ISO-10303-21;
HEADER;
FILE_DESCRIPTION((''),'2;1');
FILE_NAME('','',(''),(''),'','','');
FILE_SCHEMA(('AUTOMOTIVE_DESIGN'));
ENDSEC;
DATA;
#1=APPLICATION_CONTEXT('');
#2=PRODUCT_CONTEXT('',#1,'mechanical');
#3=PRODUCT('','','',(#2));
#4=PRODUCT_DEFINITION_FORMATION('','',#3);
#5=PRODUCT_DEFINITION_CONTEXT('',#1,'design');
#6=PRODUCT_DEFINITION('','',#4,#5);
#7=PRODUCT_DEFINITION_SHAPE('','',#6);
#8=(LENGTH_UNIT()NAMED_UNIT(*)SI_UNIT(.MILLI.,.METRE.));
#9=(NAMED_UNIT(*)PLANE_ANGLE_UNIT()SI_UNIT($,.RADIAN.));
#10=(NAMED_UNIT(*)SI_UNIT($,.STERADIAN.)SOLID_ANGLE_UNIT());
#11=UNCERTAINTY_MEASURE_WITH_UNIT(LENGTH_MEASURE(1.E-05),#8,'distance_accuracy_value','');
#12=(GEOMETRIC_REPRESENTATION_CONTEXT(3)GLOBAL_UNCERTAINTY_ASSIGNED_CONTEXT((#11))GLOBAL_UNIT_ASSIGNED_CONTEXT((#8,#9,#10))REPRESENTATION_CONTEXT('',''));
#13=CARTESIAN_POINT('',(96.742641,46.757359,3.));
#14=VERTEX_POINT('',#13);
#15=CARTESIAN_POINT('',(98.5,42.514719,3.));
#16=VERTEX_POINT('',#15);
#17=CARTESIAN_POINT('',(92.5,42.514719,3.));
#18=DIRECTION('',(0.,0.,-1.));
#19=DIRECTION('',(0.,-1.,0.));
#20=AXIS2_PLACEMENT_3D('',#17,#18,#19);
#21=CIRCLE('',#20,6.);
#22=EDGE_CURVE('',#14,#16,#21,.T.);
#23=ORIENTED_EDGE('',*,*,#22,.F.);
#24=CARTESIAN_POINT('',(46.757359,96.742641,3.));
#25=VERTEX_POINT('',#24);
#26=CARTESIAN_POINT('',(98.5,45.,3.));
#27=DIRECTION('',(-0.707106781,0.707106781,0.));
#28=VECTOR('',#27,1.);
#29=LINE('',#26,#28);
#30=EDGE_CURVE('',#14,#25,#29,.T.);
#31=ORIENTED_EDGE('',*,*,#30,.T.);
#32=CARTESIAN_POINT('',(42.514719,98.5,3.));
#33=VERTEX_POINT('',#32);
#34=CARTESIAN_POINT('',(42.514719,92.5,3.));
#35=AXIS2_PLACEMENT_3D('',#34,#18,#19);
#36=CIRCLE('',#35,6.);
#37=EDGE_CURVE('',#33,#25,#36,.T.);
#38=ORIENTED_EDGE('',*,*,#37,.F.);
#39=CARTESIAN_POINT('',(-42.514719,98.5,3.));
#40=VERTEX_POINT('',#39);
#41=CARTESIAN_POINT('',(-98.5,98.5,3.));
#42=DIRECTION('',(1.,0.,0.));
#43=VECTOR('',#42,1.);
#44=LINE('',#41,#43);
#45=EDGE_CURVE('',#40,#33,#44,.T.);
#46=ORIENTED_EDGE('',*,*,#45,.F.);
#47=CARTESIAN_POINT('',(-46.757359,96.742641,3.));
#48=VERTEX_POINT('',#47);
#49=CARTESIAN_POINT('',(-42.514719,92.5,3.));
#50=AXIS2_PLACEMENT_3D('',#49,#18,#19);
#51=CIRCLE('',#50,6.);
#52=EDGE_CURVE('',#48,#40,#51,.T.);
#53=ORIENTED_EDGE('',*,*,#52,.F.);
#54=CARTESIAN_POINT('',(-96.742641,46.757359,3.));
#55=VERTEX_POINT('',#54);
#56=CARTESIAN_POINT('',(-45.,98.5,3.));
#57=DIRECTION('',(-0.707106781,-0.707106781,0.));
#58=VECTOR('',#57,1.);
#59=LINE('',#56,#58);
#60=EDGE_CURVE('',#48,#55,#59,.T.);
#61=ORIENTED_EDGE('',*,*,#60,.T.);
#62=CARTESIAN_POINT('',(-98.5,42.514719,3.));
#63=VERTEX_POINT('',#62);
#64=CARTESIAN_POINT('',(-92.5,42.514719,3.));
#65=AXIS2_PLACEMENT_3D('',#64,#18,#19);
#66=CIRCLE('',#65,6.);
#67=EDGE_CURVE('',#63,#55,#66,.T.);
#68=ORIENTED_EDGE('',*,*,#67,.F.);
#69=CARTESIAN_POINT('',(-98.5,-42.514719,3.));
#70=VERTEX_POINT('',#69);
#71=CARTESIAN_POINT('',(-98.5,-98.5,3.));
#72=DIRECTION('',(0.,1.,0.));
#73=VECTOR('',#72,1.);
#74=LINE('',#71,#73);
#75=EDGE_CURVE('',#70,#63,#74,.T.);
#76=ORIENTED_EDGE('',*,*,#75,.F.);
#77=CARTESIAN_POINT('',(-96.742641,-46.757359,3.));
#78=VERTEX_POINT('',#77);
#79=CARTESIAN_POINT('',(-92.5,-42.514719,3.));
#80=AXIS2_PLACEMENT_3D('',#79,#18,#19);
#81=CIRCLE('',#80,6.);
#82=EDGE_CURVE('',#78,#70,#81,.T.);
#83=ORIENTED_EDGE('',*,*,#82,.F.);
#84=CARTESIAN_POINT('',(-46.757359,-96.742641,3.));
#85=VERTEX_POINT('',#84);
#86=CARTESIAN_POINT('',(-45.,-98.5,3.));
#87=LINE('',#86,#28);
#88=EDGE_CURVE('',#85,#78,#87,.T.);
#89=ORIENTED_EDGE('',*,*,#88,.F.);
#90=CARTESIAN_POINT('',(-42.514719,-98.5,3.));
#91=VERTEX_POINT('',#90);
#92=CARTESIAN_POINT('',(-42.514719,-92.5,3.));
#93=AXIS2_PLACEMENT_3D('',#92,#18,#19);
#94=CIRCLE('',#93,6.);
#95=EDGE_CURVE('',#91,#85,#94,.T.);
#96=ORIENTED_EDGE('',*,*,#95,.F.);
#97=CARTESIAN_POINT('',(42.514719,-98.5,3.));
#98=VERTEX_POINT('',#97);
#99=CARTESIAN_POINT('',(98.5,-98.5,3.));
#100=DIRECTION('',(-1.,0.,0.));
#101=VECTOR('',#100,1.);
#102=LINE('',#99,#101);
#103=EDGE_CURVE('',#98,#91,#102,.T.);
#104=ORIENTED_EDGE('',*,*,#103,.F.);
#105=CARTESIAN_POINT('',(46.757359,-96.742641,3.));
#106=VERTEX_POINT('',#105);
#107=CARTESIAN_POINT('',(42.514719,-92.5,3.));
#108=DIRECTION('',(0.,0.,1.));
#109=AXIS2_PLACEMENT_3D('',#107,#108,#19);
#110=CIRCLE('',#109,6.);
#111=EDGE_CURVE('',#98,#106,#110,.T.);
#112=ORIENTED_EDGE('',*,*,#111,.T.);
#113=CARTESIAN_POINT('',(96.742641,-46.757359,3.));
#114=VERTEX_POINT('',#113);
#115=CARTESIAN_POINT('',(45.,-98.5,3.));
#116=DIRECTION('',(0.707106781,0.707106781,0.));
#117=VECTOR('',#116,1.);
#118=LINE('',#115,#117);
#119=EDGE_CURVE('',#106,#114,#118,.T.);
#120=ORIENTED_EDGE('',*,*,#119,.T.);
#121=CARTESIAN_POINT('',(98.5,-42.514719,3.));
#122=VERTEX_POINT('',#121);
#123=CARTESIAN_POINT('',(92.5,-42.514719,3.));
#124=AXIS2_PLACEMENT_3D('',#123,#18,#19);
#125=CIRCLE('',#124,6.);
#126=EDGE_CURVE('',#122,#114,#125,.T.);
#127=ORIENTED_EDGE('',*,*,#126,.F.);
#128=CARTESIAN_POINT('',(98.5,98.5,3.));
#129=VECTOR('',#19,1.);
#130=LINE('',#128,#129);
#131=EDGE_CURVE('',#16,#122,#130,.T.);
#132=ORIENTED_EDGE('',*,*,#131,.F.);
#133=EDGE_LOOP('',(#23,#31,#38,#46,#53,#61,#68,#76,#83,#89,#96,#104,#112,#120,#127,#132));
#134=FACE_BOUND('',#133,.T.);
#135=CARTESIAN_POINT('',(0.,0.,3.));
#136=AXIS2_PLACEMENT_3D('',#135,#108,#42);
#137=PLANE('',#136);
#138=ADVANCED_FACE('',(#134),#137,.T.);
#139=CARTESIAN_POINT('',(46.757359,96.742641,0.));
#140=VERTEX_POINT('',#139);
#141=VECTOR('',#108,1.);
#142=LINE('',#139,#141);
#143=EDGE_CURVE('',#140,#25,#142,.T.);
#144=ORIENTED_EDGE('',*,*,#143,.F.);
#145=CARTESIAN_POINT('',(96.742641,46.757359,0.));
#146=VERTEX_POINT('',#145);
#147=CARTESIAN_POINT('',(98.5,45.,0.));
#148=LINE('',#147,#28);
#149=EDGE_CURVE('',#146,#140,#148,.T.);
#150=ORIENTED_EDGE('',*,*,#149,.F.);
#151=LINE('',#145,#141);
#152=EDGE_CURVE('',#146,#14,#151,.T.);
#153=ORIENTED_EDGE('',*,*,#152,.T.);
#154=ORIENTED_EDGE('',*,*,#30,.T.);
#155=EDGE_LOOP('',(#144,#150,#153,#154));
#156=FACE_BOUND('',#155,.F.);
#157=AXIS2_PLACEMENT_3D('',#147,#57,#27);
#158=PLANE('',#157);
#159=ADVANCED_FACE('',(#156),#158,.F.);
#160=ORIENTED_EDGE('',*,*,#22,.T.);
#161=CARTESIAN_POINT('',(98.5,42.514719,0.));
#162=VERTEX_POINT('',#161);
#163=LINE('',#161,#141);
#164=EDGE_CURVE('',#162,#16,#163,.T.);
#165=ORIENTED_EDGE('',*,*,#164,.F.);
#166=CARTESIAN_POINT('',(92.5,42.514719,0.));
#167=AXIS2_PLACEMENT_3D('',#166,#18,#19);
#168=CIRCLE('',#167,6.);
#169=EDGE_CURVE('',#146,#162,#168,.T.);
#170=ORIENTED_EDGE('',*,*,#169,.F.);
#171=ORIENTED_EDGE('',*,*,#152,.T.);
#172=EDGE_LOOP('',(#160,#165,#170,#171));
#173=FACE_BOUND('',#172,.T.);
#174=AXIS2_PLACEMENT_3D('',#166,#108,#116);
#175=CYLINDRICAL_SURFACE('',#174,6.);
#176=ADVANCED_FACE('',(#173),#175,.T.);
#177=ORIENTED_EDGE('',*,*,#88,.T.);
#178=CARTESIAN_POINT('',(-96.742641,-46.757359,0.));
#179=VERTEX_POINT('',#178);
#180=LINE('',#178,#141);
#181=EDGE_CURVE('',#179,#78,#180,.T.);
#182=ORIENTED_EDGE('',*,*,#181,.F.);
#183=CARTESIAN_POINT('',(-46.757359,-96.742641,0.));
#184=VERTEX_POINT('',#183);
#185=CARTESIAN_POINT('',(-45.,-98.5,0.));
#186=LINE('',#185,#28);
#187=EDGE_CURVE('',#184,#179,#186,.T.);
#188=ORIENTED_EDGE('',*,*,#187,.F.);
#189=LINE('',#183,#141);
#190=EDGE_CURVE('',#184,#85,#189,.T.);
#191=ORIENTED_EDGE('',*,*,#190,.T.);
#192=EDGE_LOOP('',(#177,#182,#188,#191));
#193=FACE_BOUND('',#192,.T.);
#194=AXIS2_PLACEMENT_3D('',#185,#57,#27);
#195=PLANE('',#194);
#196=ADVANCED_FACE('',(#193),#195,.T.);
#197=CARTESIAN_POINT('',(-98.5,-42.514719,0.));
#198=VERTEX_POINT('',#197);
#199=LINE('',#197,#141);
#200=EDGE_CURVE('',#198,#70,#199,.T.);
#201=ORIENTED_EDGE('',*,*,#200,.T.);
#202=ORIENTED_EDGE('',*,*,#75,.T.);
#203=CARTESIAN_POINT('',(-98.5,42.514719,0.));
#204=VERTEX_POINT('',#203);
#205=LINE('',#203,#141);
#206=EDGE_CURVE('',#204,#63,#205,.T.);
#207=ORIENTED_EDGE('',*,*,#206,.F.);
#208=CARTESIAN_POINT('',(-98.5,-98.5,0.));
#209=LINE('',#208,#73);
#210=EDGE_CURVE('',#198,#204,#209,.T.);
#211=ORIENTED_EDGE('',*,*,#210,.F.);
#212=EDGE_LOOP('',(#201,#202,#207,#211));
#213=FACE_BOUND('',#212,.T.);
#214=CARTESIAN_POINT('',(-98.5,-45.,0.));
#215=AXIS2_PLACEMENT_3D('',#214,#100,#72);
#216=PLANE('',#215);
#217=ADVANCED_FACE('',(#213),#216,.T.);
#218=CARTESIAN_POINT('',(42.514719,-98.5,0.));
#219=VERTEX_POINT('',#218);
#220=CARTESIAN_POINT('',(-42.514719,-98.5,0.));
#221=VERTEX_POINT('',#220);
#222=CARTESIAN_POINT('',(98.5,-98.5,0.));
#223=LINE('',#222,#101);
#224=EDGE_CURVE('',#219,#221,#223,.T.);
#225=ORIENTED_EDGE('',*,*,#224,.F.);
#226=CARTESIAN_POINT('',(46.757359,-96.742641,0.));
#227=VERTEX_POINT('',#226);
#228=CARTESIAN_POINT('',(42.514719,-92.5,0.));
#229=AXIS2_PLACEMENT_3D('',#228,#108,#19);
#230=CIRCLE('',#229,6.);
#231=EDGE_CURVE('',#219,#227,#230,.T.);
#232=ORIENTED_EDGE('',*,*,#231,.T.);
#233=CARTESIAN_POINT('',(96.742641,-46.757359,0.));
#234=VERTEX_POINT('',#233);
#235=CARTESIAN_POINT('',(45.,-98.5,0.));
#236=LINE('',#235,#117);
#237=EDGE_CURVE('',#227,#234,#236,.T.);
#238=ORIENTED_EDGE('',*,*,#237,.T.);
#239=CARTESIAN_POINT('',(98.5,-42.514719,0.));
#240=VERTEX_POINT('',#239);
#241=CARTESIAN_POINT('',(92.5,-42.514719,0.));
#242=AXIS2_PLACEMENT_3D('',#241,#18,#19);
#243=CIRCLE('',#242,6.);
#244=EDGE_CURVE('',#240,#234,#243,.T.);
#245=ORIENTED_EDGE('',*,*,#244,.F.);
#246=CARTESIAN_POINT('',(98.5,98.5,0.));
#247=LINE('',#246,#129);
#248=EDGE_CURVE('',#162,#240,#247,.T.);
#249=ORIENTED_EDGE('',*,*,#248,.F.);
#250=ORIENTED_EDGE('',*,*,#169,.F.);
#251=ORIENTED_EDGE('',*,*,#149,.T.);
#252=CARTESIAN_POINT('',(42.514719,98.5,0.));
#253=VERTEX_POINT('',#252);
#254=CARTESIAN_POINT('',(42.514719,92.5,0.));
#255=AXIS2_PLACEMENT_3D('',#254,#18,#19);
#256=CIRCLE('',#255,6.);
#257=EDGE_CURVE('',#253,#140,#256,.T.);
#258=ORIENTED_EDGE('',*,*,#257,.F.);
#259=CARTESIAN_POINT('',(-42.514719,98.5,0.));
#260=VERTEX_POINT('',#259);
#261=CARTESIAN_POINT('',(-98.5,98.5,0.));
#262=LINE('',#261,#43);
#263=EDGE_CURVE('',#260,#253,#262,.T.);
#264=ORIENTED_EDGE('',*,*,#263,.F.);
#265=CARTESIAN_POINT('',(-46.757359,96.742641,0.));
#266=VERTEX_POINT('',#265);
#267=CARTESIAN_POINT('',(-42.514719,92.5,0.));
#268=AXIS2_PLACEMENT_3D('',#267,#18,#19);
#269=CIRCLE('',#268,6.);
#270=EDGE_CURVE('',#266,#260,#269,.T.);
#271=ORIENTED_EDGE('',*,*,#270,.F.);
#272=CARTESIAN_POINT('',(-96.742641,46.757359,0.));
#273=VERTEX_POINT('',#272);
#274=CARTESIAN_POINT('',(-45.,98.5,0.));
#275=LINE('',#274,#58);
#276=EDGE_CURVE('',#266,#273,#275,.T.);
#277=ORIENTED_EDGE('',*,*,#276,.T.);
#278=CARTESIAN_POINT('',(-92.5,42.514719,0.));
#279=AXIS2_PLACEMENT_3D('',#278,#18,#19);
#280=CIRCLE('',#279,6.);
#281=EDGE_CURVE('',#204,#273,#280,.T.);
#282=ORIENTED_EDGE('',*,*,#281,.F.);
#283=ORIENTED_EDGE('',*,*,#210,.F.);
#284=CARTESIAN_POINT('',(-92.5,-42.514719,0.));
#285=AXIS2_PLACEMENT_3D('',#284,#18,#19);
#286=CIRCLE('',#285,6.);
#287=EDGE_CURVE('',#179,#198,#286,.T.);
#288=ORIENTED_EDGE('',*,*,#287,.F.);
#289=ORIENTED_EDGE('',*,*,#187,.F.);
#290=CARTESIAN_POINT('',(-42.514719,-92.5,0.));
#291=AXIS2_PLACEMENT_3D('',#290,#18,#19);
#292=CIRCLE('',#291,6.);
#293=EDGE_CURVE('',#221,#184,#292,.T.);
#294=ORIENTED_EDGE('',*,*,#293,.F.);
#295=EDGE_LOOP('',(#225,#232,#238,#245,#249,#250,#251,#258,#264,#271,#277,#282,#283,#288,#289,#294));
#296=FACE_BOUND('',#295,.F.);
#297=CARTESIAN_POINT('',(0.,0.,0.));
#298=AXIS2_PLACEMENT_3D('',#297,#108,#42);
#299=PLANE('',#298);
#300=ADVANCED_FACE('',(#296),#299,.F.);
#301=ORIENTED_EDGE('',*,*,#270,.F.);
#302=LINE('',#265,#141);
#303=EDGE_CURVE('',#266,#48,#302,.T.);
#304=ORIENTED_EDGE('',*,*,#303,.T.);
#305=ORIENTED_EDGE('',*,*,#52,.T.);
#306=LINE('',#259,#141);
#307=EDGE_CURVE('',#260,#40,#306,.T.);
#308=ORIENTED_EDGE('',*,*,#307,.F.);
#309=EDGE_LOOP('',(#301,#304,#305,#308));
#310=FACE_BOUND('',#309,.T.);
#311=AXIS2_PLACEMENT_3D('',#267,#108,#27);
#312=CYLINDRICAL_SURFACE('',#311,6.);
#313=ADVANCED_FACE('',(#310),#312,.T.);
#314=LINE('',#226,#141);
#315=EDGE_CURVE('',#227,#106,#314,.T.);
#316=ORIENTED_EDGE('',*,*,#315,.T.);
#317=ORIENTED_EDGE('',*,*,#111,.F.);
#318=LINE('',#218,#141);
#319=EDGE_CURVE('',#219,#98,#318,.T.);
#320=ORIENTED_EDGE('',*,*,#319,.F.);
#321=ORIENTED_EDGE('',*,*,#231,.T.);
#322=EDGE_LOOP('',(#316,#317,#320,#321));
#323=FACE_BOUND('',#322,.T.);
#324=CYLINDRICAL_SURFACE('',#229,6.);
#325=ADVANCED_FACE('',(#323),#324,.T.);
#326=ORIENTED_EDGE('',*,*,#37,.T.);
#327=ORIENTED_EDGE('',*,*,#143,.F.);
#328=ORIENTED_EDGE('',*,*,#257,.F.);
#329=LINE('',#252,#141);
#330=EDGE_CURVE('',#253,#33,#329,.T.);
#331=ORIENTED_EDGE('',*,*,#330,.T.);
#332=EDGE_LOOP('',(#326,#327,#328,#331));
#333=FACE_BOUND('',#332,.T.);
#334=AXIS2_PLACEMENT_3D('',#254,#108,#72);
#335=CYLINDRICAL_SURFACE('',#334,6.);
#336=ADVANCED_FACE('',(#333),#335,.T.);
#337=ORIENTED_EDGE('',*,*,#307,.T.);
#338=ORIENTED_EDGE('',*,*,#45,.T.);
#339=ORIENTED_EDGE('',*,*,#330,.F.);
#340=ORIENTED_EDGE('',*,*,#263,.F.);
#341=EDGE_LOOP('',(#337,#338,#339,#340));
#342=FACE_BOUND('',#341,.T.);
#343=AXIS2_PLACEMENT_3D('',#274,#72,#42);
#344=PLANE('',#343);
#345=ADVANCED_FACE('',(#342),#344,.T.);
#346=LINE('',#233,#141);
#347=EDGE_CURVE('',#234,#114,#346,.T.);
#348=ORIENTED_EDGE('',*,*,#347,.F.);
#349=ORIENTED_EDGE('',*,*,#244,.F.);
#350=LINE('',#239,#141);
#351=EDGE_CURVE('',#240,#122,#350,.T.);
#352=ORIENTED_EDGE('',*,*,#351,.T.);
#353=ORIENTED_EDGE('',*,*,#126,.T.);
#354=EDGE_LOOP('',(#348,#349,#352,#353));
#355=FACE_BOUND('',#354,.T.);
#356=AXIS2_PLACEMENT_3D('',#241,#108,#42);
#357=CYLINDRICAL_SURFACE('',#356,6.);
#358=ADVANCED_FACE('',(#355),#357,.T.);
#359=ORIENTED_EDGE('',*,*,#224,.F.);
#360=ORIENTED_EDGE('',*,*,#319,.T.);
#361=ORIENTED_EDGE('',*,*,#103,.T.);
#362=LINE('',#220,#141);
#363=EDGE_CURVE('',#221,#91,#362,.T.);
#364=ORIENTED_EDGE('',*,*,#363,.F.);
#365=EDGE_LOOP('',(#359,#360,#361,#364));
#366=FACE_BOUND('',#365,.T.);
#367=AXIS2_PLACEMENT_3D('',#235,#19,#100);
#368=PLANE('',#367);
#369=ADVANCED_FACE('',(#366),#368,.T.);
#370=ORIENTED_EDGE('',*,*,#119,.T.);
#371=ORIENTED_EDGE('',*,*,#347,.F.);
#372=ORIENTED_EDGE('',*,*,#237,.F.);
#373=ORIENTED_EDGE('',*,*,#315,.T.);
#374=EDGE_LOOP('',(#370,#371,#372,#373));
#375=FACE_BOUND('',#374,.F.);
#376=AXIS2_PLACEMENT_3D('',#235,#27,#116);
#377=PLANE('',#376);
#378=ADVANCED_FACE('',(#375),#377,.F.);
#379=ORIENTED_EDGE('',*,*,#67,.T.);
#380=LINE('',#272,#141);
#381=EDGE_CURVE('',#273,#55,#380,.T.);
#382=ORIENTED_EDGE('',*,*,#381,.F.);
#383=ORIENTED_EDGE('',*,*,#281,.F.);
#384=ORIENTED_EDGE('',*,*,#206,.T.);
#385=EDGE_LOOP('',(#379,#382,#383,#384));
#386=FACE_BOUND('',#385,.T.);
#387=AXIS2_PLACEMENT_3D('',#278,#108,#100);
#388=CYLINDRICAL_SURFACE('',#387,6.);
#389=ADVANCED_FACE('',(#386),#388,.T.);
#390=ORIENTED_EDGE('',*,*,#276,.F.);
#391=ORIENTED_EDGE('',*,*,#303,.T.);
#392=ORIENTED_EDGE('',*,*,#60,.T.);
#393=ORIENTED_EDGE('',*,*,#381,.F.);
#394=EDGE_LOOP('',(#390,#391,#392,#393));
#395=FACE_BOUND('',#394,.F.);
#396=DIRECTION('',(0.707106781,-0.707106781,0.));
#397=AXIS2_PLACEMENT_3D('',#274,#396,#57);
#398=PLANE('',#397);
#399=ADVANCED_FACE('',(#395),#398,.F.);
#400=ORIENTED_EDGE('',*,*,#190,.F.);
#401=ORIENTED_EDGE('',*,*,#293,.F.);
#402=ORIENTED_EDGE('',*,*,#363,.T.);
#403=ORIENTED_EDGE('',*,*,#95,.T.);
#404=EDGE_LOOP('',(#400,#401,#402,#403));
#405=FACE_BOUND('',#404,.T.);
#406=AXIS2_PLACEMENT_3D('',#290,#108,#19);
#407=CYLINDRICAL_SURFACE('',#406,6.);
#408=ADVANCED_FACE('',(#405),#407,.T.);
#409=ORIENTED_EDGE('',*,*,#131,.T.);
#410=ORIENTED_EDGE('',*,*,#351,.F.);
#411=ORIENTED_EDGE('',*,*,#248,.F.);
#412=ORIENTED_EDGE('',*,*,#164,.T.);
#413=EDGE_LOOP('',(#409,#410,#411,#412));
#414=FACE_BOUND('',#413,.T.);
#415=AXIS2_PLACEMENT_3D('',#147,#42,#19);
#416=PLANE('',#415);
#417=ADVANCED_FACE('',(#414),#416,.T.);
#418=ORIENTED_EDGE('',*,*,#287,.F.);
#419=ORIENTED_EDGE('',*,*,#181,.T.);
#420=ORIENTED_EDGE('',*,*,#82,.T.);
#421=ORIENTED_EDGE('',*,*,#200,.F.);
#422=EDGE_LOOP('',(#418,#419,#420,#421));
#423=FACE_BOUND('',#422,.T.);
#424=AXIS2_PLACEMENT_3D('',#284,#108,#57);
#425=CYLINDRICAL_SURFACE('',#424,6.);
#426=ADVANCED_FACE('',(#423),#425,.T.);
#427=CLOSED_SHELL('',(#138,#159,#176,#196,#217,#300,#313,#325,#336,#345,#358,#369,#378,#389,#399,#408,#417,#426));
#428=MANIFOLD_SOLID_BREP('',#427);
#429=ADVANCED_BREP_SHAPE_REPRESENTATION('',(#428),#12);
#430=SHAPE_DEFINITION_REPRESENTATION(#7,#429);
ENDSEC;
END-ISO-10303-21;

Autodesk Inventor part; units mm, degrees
ref_plane "YZ Plane" through (0, 0, 0) normal (1, 0, 0) x (0, 1, 0)
ref_plane "XZ Plane" through (0, 0, 0) normal (0, 1, 0) x (-1, 0, 0)
ref_plane "XY Plane" through (0, 0, 0) normal (0, 0, 1) x (1, 0, 0)
sketch "Sketch8" plane through (0, 0, 0) normal (0, 0, 1) x (1, 0, 0)
  line L0 (98.5, -98.5) -> (-98.5, -98.5)
  line L1 (-98.5, -98.5) -> (-98.5, 98.5)
  line L2 (-98.5, 98.5) -> (98.5, 98.5)
  line L3 (98.5, 98.5) -> (98.5, -98.5)
  line L4 (98.5, -98.5) -> (-98.5, 98.5) construction
  line L5 (-98.5, -98.5) -> (98.5, 98.5) construction
  line L6 (45, -98.5) -> (98.5, -45)
  line L7 (-45, -98.5) -> (-98.5, -45)
  line L8 (98.5, 45) -> (45, 98.5)
  line L9 (-45, 98.5) -> (-98.5, 45)
  line L10 (0, -98.5) -> (0, 98.5) construction
  point P0 (0, 0)
  dimension "d42" = 197
  dimension "d43" = 197
  dimension "d44" = 90
extrude "Plate3" add sketch "Sketch8" along normal blind 3 contours L0 L7 L1 L9 L2 L8 L3 L6
fillet "Corner Round1" radius 6 8 edges at (-45, -98.5, 1.5) (45, -98.5, 1.5) (98.5, -45, 1.5) (98.5, 45, 1.5) (45, 98.5, 1.5) (-45, 98.5, 1.5) (-98.5, 45, 1.5) (-98.5, -45, 1.5)
equation "\"d43\" = d42"
equation "\"d45\" = Thickness"
equation "\"BendReliefWidth\" = Thickness"
equation "\"BendReliefDepth\" = 0.5 * Thickness"
equation "\"CornerReliefSize\" = 4 * Thickness"
equation "\"MinimumRemnant\" = 2 * Thickness"
equation "\"TransitionRadius\" = BendRadius"
equation "\"JacobiRadiusSize\" = BendRadius"
equation "\"GapSize\" = Thickness"
equation "\"Thickness\" = 3"
equation "\"BendRadius\" = 5"
properties part number "DSB 210 Axis cap" material "Stainless Steel"
